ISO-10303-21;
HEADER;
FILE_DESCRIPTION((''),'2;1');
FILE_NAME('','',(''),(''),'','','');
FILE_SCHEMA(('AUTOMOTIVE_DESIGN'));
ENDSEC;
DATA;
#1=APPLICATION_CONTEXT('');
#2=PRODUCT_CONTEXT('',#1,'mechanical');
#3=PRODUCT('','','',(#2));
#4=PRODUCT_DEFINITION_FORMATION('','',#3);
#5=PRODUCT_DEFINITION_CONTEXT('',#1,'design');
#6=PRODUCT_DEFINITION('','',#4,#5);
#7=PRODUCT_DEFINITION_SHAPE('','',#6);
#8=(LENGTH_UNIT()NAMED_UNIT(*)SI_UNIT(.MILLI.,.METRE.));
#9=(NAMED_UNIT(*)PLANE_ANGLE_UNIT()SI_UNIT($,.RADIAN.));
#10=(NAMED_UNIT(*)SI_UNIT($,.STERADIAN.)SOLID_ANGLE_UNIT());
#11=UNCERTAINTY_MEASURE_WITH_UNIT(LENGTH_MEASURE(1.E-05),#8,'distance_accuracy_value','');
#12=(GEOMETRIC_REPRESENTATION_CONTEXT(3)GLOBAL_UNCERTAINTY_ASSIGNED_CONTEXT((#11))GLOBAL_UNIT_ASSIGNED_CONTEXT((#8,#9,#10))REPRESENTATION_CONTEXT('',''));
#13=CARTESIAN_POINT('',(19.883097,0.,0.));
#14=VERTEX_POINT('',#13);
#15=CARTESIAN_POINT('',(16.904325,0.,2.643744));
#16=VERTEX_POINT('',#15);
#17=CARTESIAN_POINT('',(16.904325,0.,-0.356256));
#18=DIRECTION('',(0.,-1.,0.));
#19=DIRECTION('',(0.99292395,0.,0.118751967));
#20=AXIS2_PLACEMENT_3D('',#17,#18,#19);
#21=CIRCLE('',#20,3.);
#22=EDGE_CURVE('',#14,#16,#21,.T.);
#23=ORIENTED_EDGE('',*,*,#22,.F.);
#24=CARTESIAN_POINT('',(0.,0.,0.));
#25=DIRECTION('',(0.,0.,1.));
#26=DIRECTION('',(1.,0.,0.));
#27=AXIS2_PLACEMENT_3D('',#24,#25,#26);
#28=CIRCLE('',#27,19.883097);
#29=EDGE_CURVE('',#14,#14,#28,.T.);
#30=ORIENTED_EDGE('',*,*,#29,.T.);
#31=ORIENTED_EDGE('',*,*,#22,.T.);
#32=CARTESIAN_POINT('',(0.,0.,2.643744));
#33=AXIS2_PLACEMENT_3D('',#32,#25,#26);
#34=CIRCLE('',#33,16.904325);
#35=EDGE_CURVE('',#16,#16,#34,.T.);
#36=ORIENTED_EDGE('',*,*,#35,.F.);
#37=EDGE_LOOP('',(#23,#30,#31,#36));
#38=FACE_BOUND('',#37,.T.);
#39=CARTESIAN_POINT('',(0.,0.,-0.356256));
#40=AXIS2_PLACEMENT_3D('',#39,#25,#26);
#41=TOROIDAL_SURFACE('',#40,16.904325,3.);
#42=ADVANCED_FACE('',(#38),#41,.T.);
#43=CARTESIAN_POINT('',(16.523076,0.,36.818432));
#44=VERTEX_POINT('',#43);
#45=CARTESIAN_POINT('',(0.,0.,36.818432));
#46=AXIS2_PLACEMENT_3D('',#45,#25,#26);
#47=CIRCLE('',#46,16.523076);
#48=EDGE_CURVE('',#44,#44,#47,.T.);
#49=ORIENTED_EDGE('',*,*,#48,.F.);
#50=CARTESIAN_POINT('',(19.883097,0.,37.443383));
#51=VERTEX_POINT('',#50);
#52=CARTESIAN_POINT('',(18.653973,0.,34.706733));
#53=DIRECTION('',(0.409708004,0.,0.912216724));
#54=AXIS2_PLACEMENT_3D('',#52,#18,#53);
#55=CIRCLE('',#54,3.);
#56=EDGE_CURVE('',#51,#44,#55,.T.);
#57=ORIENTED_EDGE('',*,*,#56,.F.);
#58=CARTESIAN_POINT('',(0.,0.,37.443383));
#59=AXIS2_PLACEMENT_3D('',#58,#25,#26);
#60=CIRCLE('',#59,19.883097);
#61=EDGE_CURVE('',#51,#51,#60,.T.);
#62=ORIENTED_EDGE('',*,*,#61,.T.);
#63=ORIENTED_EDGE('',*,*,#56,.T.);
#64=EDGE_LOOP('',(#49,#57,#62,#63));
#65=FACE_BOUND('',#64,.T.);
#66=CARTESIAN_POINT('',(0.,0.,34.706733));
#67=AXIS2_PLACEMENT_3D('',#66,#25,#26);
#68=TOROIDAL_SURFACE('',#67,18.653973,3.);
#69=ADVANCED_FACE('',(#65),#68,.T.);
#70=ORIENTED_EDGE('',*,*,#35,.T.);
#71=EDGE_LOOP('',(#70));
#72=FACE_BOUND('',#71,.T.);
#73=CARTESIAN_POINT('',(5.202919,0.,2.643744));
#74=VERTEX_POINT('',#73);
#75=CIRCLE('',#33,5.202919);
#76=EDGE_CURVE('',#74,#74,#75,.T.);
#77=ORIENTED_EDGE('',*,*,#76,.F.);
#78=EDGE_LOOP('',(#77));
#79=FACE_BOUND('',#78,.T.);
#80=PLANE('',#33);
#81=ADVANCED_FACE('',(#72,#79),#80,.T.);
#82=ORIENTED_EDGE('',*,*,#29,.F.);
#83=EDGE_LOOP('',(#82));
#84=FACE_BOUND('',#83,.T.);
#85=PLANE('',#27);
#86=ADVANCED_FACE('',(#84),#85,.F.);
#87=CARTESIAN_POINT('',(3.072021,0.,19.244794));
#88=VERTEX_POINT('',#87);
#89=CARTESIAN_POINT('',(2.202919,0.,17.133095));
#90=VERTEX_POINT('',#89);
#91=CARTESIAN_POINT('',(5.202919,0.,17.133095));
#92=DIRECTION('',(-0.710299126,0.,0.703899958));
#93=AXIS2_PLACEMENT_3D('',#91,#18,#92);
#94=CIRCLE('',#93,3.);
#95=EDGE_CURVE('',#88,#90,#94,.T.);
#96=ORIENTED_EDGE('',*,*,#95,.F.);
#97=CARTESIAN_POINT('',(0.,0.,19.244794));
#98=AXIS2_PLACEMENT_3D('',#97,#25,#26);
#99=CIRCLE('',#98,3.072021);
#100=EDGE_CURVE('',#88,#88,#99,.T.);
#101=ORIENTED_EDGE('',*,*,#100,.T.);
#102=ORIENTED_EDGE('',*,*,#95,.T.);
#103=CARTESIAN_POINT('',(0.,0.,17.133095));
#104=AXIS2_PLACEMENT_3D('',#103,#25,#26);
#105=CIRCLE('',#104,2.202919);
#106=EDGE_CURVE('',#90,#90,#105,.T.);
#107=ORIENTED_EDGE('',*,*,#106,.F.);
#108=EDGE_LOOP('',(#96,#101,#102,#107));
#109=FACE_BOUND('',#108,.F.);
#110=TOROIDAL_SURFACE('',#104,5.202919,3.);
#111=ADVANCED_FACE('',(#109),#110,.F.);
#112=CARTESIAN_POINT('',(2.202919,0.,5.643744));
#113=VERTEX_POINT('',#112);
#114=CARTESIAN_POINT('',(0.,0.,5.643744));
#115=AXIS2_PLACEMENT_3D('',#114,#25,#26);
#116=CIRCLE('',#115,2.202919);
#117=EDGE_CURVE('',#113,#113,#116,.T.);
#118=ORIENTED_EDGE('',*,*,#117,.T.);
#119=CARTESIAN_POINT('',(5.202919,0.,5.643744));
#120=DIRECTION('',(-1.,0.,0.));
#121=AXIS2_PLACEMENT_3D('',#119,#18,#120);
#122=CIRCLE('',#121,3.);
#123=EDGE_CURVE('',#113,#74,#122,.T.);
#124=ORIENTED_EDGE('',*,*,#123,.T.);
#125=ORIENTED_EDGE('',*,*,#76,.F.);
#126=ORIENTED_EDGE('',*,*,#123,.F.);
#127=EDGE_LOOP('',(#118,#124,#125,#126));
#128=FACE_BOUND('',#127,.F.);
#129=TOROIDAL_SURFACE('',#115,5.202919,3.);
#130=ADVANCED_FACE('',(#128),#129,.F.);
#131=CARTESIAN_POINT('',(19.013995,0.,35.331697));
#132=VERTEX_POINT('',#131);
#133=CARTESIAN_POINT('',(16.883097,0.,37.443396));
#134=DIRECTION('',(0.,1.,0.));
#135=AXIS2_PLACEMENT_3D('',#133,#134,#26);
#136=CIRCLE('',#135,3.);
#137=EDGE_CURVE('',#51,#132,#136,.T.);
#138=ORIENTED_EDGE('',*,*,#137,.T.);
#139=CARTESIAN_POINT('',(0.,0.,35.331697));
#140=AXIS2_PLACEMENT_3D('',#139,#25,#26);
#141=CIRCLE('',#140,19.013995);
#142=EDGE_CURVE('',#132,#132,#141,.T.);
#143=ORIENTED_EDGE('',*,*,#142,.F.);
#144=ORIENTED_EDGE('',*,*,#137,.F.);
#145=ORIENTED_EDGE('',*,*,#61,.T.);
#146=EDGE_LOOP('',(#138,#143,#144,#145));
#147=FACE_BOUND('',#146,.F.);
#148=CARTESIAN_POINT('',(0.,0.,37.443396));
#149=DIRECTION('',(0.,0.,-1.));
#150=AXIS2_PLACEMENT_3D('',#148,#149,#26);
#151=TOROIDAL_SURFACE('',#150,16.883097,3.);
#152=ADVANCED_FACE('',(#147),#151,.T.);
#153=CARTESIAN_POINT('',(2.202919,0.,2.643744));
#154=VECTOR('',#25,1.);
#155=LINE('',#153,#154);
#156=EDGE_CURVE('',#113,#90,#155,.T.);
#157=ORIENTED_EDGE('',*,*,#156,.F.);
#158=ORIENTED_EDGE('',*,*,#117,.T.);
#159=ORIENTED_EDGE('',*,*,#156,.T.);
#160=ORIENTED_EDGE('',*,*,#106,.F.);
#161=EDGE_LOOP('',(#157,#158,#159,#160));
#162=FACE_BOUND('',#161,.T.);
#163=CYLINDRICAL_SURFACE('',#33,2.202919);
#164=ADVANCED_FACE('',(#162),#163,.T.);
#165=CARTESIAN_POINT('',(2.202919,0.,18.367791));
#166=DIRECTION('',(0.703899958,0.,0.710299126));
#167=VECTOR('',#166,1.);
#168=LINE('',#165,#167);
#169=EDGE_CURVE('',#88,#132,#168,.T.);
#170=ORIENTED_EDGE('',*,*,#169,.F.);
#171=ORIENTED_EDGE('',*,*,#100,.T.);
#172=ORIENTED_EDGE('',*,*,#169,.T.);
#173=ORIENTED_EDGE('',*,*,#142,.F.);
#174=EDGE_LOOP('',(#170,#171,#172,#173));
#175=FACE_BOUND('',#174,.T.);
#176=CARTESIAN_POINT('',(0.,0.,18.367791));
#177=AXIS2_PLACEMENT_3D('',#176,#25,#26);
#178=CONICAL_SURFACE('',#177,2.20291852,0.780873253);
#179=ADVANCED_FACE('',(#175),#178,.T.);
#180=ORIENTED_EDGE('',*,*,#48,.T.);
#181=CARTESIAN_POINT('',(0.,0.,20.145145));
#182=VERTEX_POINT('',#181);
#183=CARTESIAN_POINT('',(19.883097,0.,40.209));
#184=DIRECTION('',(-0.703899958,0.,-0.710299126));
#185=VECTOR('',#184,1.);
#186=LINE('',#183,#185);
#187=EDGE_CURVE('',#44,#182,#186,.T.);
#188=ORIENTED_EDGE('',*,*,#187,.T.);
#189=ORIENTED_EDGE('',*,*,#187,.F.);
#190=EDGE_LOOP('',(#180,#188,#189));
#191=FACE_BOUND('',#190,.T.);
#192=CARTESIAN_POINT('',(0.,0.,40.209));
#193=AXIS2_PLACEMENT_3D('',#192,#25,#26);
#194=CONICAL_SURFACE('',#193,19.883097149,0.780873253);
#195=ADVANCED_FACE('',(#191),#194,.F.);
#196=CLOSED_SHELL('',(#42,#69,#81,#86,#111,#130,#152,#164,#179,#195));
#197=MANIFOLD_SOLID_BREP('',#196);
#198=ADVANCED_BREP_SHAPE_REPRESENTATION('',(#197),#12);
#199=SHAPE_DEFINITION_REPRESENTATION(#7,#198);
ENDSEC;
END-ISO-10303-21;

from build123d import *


# Not quite as in the source:
# - a fillet or chamfer that OpenCascade refuses, or shapes differently, is made with other operations: its cross-section is extruded or revolved along the edge and cut away or added


with BuildPart() as f1:
    # F0 (on Front) → F1 (revolve)
    with BuildSketch(Plane.XZ):
        Polygon((0, 20.1451450631), (0, 16.144845517), (2.2029185202, 18.3677908103), (19.8830971494, 36.208700271), (19.8830971494, 40.2089998171), align=None)
        Polygon((0, 2.6437440974), (0, 0), (19.8830971494, 0), (19.8830971494, 2.6437440974), (2.2029185202, 2.6437440974), align=None)
        Polygon((0, 16.144845517), (0, 2.6437440974), (2.2029185202, 2.6437440974), (2.2029185202, 18.3677908103), align=None)
    revolve(axis=Axis((0, 0, 11.3944445803), (0, 0, 1)))

    # F2: fillet of radius 3 on 3 edges, made by hand

    # F2_s1 → F2_t2 (revolve, cut)
    with BuildSketch(Plane.XZ):
        with BuildLine():
            ThreePointArc((19.8830971494, 37.4433964965), (19.6573260634, 36.3016198402), (19.0139945276, 35.331696621))
            Line((19.0139945276, 35.331696621), (19.0566124751, 35.2894626235))
            Line((19.0566124751, 35.2894626235), (19.9430971494, 36.1840063464))
            Line((19.9430971494, 36.1840063464), (19.9430971494, 37.4433964965))
            Line((19.9430971494, 37.4433964965), (19.8830971494, 37.4433964965))
        make_face()
    revolve(axis=Axis((0, 0, 36.208700271), (0, 0, 1)), mode=Mode.SUBTRACT)

    # F2_s3 → F2_t4 (revolve, cut)
    with BuildSketch(Plane.XZ):
        with BuildLine():
            ThreePointArc((19.8830971494, 0), (18.8957107839, 1.8874873657), (16.9043252998, 2.6437440974))
            Line((16.9043252998, 2.6437440974), (16.9043252998, 2.7037440974))
            Line((16.9043252998, 2.7037440974), (19.8830971494, 2.7037440974))
            Line((19.8830971494, 2.7037440974), (19.9430971494, 2.6437440974))
            ThreePointArc((19.9430971494, 2.6437440974), (19.9430971494, 1.3218720487), (19.9426725864, 0.0071251181))
            Line((19.9426725864, 0.0071251181), (19.8830971494, 0))
        make_face()
    revolve(axis=Axis((0, 0, 2.6437440974), (0, 0, 1)), mode=Mode.SUBTRACT)

    # F2_s5 → F2_t6 (revolve)
    with BuildSketch(Plane.XZ):
        with BuildLine():
            ThreePointArc((3.0720211421, 19.2447944602), (2.4286896062, 18.274871241), (2.2029185202, 17.1330945847))
            Line((2.2029185202, 17.1330945847), (2.1429185202, 17.1330945847))
            Line((2.1429185202, 17.1330945847), (2.1429185202, 18.3924847348))
            Line((2.1429185202, 18.3924847348), (3.0294031945, 19.2870284577))
            Line((3.0294031945, 19.2870284577), (3.0720211421, 19.2447944602))
        make_face()
    revolve(axis=Axis((0, 0, 18.3677908103), (0, 0, 1)))

    # F3: fillet of radius 3 on 2 edges, made by hand

    # F3_s1 → F3_t2 (revolve)
    with BuildSketch(Plane.XZ):
        with BuildLine():
            ThreePointArc((2.2029185202, 5.6437440974), (3.0815981766, 3.5224237539), (5.2029185202, 2.6437440974))
            Line((5.2029185202, 2.6437440974), (2.2029185202, 2.6437440974))
            Line((2.2029185202, 2.6437440974), (2.2029185202, 5.6437440974))
        make_face()
    revolve(axis=Axis((0, 0, 2.6437440974), (0, 0, 1)))

    # F3_s3 → F3_t4 (revolve, cut)
    with BuildSketch(Plane.XZ):
        with BuildLine():
            ThreePointArc((19.8830971494, 37.4433827054), (18.1053935902, 37.6561495071), (16.5230757584, 36.8184324094))
            Line((16.5230757584, 36.8184324094), (19.8830971494, 40.2089998171))
            Line((19.8830971494, 40.2089998171), (19.8830971494, 37.4433827054))
        make_face()
    revolve(axis=Axis((0, 0, 40.2089998171), (0, 0, 1)), mode=Mode.SUBTRACT)


solid = f1.part
